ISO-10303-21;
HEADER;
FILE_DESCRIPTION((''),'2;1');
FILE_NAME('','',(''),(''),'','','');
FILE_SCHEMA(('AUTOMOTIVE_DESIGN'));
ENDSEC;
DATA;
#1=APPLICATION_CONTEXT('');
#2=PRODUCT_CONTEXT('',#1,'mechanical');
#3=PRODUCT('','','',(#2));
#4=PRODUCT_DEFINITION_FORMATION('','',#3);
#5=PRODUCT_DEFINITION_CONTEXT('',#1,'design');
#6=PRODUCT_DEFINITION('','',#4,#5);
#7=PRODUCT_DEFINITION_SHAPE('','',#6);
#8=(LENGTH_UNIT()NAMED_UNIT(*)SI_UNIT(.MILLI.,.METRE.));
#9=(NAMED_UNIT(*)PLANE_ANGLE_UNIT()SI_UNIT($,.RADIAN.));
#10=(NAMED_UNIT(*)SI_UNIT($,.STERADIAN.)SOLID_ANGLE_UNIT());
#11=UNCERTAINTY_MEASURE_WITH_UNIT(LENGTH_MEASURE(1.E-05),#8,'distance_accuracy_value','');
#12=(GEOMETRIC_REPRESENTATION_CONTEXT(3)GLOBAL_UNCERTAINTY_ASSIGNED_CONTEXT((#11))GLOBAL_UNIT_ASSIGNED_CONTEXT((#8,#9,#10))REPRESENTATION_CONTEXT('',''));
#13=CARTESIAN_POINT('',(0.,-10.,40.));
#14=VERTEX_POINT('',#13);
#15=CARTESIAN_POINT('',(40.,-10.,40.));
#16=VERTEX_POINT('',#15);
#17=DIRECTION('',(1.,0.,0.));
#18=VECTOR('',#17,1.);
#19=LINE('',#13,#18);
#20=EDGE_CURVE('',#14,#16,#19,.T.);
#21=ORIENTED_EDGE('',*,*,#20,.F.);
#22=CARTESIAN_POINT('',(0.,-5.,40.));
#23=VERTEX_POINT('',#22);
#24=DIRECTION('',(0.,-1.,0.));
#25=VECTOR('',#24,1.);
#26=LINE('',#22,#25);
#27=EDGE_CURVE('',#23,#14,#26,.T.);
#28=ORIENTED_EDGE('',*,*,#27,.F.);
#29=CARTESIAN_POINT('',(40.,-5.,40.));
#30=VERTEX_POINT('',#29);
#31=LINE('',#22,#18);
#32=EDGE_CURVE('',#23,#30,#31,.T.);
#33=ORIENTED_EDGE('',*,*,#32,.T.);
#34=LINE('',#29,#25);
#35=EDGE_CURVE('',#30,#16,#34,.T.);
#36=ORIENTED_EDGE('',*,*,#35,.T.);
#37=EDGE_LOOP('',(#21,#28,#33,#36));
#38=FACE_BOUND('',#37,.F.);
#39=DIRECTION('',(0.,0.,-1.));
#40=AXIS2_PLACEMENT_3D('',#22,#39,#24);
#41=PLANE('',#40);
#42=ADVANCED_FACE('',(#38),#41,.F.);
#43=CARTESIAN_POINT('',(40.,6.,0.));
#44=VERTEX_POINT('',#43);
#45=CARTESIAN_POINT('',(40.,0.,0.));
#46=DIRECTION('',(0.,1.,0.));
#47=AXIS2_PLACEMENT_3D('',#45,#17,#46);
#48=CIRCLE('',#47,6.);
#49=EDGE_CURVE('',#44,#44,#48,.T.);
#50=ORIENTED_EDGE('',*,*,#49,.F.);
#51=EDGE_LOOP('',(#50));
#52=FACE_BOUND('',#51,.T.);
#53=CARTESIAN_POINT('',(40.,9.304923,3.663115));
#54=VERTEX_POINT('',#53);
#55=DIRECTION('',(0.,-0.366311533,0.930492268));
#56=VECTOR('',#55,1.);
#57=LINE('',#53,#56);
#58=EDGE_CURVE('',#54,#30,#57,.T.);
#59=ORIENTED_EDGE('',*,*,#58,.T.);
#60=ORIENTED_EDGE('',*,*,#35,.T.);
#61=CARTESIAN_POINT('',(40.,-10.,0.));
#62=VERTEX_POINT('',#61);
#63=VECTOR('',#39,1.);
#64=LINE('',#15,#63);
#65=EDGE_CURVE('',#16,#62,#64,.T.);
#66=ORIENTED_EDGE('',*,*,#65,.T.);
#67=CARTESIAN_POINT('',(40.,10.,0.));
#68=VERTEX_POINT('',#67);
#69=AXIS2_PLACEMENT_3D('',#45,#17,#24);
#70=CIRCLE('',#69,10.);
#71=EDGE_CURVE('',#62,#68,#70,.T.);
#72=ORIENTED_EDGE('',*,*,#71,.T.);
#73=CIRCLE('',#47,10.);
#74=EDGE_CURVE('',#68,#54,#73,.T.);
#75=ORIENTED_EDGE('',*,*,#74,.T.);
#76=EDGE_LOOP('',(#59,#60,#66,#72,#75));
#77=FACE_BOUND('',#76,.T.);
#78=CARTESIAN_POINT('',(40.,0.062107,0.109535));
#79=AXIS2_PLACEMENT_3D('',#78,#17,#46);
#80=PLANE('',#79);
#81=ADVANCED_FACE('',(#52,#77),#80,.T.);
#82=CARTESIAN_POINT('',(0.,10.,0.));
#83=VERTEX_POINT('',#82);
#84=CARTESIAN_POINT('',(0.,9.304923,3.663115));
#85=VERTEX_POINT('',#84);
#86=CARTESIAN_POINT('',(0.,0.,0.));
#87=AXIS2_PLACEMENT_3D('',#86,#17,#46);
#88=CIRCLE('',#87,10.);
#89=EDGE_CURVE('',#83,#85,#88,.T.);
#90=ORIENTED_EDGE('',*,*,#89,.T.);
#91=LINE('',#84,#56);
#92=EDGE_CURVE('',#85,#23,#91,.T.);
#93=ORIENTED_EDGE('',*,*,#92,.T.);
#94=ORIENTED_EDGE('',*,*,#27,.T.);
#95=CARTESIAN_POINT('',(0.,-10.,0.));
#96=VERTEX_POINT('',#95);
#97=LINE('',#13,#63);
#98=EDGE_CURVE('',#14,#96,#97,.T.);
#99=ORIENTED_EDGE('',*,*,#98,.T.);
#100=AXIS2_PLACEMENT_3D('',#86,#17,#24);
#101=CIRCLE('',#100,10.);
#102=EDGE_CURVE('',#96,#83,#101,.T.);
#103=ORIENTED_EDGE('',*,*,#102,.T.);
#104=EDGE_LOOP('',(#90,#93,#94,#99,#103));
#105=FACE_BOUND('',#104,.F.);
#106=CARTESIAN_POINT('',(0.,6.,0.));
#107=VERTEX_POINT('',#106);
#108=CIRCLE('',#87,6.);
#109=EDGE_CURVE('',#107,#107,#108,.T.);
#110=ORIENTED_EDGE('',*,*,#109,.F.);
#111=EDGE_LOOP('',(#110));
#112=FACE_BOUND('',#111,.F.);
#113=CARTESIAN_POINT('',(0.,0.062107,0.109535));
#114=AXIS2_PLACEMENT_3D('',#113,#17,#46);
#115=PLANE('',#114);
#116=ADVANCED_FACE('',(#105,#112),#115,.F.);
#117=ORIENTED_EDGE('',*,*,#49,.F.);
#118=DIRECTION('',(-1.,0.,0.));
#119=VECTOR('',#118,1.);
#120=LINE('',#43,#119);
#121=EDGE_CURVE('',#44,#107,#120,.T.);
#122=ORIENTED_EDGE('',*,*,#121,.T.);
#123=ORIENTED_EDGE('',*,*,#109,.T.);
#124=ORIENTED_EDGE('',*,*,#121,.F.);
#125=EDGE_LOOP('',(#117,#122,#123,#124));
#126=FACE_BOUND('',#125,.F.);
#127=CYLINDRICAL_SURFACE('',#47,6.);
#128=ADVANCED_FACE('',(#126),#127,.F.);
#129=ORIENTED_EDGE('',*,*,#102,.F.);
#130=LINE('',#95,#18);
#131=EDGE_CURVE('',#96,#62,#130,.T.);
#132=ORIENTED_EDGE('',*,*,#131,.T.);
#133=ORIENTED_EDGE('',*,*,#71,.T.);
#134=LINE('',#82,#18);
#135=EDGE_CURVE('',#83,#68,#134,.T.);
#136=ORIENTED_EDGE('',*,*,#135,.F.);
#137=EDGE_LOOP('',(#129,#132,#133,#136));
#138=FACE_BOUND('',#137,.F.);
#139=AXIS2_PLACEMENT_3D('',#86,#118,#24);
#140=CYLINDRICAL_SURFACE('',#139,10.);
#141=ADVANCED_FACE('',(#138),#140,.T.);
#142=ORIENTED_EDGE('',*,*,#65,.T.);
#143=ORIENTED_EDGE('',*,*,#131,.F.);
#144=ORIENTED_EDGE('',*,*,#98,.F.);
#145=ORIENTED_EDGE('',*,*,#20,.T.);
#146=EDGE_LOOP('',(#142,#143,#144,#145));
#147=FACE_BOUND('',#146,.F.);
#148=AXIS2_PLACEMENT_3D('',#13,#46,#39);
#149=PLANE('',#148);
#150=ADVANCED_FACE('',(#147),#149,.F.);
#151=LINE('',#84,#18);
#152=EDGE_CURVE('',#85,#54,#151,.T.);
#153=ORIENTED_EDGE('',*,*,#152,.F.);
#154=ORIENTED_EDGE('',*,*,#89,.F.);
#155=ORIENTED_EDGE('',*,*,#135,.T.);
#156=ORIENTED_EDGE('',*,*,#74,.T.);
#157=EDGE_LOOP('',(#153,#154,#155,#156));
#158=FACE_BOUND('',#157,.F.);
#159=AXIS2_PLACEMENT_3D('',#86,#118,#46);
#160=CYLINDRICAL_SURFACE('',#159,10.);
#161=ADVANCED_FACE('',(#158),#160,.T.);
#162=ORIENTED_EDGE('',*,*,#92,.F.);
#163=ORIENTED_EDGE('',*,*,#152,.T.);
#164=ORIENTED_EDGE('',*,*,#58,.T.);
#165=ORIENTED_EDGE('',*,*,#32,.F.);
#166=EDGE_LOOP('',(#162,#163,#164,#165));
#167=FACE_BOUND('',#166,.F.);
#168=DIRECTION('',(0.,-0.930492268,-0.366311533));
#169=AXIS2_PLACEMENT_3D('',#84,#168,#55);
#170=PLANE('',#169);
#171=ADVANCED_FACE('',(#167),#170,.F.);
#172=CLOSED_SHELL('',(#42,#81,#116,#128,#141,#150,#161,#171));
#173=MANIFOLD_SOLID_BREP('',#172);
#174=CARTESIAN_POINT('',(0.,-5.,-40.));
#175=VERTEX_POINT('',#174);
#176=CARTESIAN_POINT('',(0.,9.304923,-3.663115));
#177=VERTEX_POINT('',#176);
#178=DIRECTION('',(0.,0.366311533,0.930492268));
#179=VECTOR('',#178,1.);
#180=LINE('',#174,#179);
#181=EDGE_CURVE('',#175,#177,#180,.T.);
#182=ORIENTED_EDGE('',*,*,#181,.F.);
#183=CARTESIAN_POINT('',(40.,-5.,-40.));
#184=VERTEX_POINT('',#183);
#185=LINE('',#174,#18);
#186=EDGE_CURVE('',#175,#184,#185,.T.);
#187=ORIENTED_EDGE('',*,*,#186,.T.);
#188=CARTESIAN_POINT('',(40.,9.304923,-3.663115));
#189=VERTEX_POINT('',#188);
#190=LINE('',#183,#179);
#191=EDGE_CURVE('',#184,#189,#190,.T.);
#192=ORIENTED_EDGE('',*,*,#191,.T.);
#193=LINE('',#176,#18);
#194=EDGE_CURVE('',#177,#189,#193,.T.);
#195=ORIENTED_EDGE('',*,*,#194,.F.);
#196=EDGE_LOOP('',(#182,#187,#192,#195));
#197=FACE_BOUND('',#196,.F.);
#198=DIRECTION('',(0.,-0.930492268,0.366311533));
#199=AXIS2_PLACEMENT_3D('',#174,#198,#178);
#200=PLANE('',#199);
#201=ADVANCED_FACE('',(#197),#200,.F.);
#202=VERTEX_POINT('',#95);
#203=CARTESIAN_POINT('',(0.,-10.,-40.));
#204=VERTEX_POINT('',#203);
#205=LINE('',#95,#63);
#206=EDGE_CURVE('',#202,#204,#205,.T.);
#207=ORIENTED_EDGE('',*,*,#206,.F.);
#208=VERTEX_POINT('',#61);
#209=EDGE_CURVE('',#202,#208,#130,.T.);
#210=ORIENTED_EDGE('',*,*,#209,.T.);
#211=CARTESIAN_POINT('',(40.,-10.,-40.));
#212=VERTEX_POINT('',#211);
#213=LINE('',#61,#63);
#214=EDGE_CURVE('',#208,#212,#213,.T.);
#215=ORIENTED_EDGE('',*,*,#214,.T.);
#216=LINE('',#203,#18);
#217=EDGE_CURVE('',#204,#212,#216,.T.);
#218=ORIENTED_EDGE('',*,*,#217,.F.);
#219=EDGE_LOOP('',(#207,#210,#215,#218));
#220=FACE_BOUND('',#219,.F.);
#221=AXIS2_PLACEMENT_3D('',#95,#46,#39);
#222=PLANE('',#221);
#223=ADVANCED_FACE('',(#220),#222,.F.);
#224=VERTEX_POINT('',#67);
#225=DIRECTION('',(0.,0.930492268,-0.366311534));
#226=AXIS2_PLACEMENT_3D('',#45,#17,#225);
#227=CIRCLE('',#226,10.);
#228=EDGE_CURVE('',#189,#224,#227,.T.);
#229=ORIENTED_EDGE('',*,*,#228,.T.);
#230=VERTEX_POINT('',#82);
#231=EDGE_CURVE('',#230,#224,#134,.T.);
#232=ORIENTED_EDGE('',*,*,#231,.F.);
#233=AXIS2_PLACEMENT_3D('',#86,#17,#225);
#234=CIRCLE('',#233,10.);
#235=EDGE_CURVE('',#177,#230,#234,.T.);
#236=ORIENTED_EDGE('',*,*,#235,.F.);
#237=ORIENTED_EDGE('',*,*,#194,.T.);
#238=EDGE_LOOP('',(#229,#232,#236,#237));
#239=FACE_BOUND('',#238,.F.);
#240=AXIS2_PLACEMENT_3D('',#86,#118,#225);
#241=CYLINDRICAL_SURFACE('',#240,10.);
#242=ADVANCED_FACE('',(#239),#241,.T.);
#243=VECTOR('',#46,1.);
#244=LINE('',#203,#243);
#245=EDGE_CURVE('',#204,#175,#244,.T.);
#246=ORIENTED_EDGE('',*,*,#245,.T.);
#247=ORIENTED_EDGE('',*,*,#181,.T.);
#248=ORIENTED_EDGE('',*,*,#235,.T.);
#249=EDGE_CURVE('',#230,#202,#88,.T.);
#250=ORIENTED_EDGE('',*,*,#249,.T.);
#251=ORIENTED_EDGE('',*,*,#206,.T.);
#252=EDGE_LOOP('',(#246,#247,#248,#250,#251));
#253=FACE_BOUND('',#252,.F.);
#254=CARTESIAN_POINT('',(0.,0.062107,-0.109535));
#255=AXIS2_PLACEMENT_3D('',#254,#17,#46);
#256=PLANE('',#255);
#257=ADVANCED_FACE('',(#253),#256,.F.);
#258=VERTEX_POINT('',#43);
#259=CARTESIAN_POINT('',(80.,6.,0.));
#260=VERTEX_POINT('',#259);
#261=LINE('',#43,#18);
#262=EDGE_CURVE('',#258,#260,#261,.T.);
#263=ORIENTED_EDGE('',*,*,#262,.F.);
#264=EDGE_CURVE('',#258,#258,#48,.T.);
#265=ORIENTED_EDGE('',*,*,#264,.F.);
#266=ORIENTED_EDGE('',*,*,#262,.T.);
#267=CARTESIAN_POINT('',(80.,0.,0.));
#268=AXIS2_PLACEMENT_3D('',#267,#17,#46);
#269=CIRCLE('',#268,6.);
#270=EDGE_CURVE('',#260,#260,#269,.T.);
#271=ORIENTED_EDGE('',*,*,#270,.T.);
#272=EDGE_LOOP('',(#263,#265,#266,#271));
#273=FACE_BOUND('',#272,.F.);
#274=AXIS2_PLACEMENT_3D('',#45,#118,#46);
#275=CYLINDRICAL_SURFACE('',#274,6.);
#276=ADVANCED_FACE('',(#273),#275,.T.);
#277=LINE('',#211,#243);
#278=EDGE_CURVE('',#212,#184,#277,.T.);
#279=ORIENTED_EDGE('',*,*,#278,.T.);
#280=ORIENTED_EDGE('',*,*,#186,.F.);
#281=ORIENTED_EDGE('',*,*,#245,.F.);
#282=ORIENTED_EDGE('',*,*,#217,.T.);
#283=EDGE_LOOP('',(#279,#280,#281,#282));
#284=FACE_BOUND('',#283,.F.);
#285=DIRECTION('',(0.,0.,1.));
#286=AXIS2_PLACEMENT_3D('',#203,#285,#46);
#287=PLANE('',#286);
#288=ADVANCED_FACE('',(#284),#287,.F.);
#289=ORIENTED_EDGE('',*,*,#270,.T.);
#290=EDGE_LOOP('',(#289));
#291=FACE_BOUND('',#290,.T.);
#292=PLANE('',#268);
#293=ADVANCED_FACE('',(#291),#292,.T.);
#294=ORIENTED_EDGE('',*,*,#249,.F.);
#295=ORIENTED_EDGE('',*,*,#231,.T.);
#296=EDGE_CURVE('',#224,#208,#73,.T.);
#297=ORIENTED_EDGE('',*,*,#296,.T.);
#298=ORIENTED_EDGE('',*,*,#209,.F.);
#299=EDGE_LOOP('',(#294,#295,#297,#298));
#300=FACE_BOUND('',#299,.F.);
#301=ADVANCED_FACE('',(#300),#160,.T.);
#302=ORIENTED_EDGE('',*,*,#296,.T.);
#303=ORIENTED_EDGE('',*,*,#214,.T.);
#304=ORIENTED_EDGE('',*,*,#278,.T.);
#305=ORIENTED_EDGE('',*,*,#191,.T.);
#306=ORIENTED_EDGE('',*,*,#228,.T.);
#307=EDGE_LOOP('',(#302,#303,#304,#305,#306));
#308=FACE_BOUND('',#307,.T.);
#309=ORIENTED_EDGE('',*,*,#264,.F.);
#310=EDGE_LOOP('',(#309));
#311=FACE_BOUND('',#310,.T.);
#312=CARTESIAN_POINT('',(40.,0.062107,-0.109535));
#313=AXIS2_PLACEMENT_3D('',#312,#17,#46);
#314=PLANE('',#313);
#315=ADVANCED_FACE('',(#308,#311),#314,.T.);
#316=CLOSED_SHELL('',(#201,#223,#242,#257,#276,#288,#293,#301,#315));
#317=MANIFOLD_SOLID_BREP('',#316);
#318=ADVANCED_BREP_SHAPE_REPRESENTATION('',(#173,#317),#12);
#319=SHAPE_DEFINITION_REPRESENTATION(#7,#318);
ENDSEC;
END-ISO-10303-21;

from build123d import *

# Parameters (mm, degrees)
F1_DEPTH = 40
F2_R     = 6
F3_DEPTH = 40.001
F5_DEPTH = 40
F6_R     = 6
F7_DEPTH = 40


with BuildPart() as f1:
    # F0 (on Right) → F1 (new body)
    with BuildSketch(Plane.YZ):
        with BuildLine():
            ThreePointArc((-10, 0), (0, -10), (10, 0))
            ThreePointArc((10, 0), (9.8246940609, 1.8642388822), (9.304922678, 3.6631153348))
            ThreePointArc((9.304922678, 3.6631153348), (-1.8642388822, 9.8246940609), (-10, 0))
        make_face()
        with BuildLine():
            ThreePointArc((-10, 0), (-1.8642388822, 9.8246940609), (9.304922678, 3.6631153348))
            Line((9.304922678, 3.6631153348), (-5, 40))
            Line((-5, 40), (-10, 40))
            Line((-10, 40), (-10, 0))
        make_face()
    extrude(amount=F1_DEPTH)

    # F2 (on face) → F3 (cut, through all)
    with BuildSketch(Plane.YZ.offset(40)):
        Circle(F2_R)
    extrude(amount=-F3_DEPTH, mode=Mode.SUBTRACT)


with BuildPart() as f5:
    # F4 (on Right) → F5 (new body)
    with BuildSketch(Plane.YZ):
        with BuildLine():
            ThreePointArc((9.304922678, -3.6631153348), (9.8246940609, -1.8642388822), (10, 0))
            ThreePointArc((10, 0), (0, 10), (-10, 0))
            ThreePointArc((-10, 0), (-1.8642388822, -9.8246940609), (9.304922678, -3.6631153348))
        make_face()
        with BuildLine():
            ThreePointArc((9.304922678, -3.6631153348), (-1.8642388822, -9.8246940609), (-10, 0))
            Line((-10, 0), (-10, -40))
            Line((-10, -40), (-5, -40))
            Line((-5, -40), (9.304922678, -3.6631153348))
        make_face()
    extrude(amount=F5_DEPTH)

    # F6 (on face) → F7 (join)
    with BuildSketch(Plane.YZ.offset(40)):
        Circle(F6_R)
    extrude(amount=F7_DEPTH)


solid = Compound([f1.part, f5.part])
